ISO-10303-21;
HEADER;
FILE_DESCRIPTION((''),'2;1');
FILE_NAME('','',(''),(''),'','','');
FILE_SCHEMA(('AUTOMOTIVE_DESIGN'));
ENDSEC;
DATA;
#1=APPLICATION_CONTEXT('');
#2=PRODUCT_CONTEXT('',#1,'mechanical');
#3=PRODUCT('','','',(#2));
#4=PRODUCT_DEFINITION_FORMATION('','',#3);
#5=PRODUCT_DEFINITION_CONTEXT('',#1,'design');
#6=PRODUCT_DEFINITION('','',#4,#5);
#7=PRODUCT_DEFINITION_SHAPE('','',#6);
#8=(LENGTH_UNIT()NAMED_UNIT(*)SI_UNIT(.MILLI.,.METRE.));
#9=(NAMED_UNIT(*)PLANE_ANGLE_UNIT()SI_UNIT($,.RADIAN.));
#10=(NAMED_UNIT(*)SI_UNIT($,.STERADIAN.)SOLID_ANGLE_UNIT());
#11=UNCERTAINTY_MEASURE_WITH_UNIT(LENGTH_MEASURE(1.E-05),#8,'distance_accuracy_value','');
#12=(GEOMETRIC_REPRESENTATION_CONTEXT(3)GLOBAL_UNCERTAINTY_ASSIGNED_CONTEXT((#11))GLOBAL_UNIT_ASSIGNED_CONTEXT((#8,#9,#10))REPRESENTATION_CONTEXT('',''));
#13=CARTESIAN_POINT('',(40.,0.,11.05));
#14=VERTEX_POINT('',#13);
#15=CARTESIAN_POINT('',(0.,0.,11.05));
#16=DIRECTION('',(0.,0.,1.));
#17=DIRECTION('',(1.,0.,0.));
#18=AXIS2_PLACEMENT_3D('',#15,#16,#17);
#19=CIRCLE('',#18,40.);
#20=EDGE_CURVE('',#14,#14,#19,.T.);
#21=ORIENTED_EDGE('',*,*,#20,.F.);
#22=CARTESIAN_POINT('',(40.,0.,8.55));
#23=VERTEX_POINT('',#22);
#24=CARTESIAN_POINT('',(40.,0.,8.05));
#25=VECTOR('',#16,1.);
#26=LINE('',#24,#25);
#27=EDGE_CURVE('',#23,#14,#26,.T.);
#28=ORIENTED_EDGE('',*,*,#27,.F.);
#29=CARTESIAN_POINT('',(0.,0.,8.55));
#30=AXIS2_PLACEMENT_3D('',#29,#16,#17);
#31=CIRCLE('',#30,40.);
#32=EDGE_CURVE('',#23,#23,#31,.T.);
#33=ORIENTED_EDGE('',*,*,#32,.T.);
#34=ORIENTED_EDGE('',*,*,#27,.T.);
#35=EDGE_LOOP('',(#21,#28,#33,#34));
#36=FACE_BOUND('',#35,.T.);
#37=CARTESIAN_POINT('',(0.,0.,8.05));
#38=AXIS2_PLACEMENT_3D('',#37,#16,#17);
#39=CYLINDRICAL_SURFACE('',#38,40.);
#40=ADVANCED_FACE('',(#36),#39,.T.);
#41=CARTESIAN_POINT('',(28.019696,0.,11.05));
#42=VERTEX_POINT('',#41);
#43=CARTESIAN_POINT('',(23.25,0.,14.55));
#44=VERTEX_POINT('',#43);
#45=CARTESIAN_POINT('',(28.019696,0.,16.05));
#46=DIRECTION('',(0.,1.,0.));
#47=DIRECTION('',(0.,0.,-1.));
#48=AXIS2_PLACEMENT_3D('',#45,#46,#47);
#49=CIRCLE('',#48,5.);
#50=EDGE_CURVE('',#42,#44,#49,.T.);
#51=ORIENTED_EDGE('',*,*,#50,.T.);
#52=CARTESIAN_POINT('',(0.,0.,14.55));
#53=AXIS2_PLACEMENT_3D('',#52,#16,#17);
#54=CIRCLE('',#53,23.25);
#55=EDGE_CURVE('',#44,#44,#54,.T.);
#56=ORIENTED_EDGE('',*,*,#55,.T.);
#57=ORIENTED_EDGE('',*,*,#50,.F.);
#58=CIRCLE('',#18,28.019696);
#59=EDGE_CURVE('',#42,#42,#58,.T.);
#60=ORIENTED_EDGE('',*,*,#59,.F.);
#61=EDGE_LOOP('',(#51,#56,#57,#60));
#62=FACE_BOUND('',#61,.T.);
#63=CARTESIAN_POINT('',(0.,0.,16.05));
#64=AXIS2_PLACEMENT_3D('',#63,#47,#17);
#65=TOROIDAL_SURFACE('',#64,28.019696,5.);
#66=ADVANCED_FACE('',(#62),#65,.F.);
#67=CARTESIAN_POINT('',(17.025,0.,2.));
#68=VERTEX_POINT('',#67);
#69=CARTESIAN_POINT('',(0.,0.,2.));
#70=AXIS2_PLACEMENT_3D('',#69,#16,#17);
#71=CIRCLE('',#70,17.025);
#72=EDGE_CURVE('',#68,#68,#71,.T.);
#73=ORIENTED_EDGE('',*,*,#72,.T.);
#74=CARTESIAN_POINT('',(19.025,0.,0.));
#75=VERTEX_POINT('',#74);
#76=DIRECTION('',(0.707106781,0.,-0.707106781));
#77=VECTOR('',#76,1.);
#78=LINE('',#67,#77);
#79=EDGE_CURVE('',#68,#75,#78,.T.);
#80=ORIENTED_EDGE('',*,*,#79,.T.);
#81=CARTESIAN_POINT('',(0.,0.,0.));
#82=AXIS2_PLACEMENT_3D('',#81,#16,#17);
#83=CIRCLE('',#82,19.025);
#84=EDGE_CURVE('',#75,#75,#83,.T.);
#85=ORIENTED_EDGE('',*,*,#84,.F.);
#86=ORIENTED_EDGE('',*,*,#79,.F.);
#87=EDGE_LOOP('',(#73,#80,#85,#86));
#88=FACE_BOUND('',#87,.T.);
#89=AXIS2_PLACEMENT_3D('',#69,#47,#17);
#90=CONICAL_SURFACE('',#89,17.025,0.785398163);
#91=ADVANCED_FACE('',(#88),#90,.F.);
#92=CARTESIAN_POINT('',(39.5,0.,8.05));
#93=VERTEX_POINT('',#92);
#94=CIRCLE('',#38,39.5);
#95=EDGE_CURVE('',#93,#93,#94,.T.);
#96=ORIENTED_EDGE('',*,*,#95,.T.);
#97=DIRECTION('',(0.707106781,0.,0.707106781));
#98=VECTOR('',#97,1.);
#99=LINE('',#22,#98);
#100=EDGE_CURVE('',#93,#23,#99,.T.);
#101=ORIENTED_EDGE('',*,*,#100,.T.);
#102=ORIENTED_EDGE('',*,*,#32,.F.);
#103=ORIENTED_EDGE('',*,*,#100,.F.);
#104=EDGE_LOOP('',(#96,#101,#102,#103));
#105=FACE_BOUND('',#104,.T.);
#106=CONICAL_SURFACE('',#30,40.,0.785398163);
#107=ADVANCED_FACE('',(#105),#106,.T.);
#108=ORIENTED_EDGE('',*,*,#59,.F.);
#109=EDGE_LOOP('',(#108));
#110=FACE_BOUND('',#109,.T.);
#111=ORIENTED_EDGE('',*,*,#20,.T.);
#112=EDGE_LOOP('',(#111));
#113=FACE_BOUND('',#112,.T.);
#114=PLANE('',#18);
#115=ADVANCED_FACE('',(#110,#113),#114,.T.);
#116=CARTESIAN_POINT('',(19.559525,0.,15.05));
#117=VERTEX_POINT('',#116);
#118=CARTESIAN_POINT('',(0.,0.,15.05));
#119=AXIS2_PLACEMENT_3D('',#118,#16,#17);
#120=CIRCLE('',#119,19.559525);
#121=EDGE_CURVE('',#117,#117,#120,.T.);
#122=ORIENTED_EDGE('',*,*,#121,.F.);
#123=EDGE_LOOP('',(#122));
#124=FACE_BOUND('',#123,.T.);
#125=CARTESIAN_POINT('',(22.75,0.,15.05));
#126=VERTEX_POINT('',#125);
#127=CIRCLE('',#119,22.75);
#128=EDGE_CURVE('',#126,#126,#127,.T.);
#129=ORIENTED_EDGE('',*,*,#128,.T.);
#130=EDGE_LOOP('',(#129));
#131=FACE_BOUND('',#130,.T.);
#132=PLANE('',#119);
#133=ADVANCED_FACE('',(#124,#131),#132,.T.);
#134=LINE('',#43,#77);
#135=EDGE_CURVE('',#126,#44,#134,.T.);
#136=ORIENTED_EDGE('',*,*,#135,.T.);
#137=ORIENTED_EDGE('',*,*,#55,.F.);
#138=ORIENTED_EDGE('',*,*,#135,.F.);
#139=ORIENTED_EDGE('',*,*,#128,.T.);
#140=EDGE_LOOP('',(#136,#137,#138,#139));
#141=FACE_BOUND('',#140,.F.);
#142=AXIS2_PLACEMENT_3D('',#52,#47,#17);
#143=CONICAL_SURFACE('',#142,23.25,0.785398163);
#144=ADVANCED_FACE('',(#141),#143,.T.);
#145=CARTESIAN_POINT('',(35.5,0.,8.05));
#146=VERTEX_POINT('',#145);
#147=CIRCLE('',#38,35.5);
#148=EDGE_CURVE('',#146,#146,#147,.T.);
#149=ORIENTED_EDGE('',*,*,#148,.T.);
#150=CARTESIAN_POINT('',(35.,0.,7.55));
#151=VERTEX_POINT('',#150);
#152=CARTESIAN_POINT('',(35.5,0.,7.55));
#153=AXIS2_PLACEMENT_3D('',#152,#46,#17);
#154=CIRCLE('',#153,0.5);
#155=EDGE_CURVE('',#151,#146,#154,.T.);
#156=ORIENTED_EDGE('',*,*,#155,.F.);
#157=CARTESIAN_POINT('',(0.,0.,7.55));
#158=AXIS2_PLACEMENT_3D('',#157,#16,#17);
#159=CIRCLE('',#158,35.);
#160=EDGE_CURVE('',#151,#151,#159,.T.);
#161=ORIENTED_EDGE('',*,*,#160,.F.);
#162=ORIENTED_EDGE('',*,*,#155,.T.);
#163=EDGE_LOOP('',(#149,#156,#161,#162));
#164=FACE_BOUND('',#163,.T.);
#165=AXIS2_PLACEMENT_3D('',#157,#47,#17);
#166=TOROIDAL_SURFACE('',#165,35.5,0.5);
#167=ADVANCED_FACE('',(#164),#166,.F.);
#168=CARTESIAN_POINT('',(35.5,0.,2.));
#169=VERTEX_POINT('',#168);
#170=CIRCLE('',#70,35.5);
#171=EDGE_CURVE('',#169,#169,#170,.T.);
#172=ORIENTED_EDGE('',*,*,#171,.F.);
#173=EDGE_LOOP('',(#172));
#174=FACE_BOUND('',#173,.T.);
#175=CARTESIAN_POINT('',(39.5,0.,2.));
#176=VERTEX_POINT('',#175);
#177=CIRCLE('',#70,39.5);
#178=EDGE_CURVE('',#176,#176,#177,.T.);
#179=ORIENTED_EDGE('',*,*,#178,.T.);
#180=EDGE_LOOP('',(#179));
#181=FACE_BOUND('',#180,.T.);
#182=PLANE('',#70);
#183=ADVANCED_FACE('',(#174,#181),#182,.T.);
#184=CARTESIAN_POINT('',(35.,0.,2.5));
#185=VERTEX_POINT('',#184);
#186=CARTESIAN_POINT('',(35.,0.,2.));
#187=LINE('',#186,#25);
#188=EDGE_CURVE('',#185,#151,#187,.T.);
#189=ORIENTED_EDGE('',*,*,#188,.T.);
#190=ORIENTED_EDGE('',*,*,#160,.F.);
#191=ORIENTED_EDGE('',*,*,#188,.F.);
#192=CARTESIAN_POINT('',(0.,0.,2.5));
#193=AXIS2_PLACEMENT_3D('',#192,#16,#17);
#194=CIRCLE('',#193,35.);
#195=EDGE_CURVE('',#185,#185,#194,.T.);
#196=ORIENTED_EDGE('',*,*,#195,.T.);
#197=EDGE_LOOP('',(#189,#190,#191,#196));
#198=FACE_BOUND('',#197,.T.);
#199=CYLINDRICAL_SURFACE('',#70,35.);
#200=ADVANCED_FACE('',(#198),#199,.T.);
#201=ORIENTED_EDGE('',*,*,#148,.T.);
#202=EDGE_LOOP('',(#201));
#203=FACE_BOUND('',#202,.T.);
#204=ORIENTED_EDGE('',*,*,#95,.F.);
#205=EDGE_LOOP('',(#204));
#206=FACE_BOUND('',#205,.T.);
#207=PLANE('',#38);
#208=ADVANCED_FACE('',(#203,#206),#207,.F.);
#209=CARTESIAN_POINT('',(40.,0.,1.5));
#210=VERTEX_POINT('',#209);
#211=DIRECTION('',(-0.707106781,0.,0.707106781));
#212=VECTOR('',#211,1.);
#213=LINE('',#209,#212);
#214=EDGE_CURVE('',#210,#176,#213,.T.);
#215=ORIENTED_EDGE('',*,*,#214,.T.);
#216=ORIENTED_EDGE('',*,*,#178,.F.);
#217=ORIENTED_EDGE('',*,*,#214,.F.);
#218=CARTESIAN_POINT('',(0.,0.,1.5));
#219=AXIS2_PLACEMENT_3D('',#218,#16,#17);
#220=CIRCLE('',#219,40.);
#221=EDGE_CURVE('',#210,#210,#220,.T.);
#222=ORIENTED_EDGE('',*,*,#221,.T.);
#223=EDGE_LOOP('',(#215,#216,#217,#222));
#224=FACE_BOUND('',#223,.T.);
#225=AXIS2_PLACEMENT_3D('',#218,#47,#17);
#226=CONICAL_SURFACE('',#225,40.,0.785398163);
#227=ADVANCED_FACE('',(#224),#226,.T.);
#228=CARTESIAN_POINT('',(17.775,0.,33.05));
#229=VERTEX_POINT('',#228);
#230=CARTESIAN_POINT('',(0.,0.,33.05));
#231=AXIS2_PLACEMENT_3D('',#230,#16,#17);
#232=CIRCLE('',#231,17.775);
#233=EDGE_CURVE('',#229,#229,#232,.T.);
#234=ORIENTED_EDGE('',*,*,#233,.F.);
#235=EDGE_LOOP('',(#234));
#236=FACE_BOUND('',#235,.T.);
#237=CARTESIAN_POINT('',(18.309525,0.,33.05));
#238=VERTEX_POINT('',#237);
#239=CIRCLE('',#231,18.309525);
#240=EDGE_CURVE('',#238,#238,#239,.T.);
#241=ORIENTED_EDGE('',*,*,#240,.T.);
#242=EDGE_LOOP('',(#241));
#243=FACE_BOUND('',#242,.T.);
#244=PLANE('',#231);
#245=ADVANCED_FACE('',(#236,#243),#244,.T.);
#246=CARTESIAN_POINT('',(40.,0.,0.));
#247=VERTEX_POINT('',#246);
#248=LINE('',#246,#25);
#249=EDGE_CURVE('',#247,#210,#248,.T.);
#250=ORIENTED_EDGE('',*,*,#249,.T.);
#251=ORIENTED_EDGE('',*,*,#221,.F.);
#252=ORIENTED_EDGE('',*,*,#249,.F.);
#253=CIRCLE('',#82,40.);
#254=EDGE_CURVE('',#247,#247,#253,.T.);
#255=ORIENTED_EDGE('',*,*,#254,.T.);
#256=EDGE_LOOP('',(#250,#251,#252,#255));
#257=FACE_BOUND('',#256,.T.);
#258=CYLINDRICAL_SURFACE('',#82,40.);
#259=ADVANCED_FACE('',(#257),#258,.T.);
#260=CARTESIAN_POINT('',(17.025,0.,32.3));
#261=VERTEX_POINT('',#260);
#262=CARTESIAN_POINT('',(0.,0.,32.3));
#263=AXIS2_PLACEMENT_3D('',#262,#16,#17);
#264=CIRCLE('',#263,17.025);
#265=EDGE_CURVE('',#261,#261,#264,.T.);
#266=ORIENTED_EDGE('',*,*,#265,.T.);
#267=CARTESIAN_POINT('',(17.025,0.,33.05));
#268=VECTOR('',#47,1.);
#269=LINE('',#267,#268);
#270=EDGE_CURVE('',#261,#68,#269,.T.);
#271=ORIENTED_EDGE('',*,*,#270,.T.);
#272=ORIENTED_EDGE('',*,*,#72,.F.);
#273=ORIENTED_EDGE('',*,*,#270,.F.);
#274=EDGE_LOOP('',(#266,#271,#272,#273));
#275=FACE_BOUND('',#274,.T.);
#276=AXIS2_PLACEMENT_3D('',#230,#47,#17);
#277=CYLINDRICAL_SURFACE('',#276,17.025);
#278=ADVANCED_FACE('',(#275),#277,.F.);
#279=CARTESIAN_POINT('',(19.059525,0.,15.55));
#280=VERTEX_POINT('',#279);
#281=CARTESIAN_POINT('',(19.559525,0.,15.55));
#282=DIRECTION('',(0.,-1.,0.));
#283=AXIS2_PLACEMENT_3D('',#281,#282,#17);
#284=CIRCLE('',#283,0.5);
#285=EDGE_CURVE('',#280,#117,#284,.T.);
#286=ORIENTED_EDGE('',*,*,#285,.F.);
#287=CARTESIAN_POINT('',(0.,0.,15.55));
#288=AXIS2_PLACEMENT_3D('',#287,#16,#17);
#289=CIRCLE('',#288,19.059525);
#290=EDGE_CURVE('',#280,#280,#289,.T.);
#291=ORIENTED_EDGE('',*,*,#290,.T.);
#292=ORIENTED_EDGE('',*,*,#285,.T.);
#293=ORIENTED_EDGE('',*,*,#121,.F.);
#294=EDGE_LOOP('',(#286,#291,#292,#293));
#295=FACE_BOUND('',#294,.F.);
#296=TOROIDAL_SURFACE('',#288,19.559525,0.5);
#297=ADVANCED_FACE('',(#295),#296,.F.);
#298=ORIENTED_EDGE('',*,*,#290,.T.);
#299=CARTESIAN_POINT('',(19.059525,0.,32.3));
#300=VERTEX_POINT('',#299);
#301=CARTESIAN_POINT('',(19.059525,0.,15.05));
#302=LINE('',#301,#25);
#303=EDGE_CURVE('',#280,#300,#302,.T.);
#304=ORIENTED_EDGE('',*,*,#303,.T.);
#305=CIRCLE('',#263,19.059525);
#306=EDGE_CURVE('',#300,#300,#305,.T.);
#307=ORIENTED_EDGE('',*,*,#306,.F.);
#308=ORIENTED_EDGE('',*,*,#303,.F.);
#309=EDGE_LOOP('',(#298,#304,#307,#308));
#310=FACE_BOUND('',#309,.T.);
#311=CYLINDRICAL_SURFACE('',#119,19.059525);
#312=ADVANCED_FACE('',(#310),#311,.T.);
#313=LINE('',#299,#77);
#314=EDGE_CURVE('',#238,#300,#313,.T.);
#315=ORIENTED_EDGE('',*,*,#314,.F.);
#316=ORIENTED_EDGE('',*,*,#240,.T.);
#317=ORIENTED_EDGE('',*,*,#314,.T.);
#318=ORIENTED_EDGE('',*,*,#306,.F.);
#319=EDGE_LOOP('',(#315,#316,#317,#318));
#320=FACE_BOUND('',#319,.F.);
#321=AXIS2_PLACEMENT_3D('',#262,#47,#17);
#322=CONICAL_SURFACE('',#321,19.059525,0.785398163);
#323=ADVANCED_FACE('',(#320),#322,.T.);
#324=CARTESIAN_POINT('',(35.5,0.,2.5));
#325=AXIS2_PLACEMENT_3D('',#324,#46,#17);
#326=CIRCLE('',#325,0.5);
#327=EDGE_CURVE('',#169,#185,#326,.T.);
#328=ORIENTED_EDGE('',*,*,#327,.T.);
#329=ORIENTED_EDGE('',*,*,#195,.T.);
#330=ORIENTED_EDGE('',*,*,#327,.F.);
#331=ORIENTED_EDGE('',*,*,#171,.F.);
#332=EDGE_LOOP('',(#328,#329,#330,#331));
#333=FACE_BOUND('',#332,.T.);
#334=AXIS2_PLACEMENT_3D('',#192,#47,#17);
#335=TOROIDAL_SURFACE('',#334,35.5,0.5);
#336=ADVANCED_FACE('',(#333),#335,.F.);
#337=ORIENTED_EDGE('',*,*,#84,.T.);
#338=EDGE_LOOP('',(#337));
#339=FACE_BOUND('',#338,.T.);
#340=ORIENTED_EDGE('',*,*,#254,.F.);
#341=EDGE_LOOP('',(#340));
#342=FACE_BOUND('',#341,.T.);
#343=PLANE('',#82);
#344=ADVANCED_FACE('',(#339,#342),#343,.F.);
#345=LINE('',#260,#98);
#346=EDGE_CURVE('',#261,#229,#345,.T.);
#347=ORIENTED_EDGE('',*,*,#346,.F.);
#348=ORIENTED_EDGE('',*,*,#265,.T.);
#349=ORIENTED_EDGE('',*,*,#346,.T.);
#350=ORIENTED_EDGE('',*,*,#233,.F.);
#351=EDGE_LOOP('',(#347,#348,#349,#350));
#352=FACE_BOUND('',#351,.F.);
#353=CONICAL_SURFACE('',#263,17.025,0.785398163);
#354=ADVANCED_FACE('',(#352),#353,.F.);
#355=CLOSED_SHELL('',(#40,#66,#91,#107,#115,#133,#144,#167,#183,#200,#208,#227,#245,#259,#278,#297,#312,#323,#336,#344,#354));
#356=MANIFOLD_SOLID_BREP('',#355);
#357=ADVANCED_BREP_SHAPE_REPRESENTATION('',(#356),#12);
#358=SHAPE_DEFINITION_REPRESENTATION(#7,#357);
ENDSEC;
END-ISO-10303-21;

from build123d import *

# Parameters (mm, degrees)
F2_SIZE = 2
F3_SIZE = 0.75
F4_SIZE = 0.5
F5_R    = 0.5


# Not quite as in the source:
# - a fillet or chamfer that OpenCascade refuses, or shapes differently, is made with other operations: its cross-section is extruded or revolved along the edge and cut away or added


with BuildPart() as f1:
    # F0 (on Front) → F1 (revolve)
    with BuildSketch(Plane.XZ):
        Polygon((17.025, 33.05), (17.025, 0), (40, 0), (40, 2), (35, 2), (35, 8.05), (40, 8.05), (40, 11.05), (23.25, 11.05), (23.25, 15.05), (19.059525, 15.05), (19.059525, 33.05), align=None)
    revolve(axis=Axis((0, 0, 13.9434672892), (0, 0, 1)))

    # F2
    f2_edges = [f1.edges().sort_by_distance(p)[0] for p in [
        (-17.025, 0, 0),
    ]]
    chamfer(f2_edges, length=F2_SIZE)

    # F3
    f3_edges = [f1.edges().sort_by_distance(p)[0] for p in [
        (-17.025, 0, 33.05),
        (-19.059525, 0, 33.05),
    ]]
    chamfer(f3_edges, length=F3_SIZE)

    # F4
    f4_edges = [f1.edges().sort_by_distance(p)[0] for p in [
        (-23.25, 0, 15.05),
        (-40, 0, 8.05),
        (-40, 0, 2),
    ]]
    chamfer(f4_edges, length=F4_SIZE)

    # F5
    f5_edges = [f1.edges().sort_by_distance(p)[0] for p in [
        (-35, 0, 8.05),
        (-35, 0, 2),
        (-19.059525, 0, 15.05),
    ]]
    fillet(f5_edges, radius=F5_R)

    # F6: fillet of radius 5 on 1 edges, made by hand

    # F6_s1 → F6_t2 (revolve)
    with BuildSketch(Plane.XZ):
        with BuildLine():
            ThreePointArc((28.0196960071, 11.05), (25.0616561155, 12.0188711259), (23.25, 14.55))
            Line((23.25, 14.55), (23.1546060799, 14.52))
            ThreePointArc((23.1546060799, 14.52), (23.15, 12.8), (23.15, 11.05))
            Line((23.15, 11.05), (23.25, 10.95))
            Line((23.25, 10.95), (28.0196960071, 10.95))
            Line((28.0196960071, 10.95), (28.0196960071, 11.05))
        make_face()
    revolve(axis=Axis((0, 0, 11.05), (0, 0, 1)))


solid = f1.part
